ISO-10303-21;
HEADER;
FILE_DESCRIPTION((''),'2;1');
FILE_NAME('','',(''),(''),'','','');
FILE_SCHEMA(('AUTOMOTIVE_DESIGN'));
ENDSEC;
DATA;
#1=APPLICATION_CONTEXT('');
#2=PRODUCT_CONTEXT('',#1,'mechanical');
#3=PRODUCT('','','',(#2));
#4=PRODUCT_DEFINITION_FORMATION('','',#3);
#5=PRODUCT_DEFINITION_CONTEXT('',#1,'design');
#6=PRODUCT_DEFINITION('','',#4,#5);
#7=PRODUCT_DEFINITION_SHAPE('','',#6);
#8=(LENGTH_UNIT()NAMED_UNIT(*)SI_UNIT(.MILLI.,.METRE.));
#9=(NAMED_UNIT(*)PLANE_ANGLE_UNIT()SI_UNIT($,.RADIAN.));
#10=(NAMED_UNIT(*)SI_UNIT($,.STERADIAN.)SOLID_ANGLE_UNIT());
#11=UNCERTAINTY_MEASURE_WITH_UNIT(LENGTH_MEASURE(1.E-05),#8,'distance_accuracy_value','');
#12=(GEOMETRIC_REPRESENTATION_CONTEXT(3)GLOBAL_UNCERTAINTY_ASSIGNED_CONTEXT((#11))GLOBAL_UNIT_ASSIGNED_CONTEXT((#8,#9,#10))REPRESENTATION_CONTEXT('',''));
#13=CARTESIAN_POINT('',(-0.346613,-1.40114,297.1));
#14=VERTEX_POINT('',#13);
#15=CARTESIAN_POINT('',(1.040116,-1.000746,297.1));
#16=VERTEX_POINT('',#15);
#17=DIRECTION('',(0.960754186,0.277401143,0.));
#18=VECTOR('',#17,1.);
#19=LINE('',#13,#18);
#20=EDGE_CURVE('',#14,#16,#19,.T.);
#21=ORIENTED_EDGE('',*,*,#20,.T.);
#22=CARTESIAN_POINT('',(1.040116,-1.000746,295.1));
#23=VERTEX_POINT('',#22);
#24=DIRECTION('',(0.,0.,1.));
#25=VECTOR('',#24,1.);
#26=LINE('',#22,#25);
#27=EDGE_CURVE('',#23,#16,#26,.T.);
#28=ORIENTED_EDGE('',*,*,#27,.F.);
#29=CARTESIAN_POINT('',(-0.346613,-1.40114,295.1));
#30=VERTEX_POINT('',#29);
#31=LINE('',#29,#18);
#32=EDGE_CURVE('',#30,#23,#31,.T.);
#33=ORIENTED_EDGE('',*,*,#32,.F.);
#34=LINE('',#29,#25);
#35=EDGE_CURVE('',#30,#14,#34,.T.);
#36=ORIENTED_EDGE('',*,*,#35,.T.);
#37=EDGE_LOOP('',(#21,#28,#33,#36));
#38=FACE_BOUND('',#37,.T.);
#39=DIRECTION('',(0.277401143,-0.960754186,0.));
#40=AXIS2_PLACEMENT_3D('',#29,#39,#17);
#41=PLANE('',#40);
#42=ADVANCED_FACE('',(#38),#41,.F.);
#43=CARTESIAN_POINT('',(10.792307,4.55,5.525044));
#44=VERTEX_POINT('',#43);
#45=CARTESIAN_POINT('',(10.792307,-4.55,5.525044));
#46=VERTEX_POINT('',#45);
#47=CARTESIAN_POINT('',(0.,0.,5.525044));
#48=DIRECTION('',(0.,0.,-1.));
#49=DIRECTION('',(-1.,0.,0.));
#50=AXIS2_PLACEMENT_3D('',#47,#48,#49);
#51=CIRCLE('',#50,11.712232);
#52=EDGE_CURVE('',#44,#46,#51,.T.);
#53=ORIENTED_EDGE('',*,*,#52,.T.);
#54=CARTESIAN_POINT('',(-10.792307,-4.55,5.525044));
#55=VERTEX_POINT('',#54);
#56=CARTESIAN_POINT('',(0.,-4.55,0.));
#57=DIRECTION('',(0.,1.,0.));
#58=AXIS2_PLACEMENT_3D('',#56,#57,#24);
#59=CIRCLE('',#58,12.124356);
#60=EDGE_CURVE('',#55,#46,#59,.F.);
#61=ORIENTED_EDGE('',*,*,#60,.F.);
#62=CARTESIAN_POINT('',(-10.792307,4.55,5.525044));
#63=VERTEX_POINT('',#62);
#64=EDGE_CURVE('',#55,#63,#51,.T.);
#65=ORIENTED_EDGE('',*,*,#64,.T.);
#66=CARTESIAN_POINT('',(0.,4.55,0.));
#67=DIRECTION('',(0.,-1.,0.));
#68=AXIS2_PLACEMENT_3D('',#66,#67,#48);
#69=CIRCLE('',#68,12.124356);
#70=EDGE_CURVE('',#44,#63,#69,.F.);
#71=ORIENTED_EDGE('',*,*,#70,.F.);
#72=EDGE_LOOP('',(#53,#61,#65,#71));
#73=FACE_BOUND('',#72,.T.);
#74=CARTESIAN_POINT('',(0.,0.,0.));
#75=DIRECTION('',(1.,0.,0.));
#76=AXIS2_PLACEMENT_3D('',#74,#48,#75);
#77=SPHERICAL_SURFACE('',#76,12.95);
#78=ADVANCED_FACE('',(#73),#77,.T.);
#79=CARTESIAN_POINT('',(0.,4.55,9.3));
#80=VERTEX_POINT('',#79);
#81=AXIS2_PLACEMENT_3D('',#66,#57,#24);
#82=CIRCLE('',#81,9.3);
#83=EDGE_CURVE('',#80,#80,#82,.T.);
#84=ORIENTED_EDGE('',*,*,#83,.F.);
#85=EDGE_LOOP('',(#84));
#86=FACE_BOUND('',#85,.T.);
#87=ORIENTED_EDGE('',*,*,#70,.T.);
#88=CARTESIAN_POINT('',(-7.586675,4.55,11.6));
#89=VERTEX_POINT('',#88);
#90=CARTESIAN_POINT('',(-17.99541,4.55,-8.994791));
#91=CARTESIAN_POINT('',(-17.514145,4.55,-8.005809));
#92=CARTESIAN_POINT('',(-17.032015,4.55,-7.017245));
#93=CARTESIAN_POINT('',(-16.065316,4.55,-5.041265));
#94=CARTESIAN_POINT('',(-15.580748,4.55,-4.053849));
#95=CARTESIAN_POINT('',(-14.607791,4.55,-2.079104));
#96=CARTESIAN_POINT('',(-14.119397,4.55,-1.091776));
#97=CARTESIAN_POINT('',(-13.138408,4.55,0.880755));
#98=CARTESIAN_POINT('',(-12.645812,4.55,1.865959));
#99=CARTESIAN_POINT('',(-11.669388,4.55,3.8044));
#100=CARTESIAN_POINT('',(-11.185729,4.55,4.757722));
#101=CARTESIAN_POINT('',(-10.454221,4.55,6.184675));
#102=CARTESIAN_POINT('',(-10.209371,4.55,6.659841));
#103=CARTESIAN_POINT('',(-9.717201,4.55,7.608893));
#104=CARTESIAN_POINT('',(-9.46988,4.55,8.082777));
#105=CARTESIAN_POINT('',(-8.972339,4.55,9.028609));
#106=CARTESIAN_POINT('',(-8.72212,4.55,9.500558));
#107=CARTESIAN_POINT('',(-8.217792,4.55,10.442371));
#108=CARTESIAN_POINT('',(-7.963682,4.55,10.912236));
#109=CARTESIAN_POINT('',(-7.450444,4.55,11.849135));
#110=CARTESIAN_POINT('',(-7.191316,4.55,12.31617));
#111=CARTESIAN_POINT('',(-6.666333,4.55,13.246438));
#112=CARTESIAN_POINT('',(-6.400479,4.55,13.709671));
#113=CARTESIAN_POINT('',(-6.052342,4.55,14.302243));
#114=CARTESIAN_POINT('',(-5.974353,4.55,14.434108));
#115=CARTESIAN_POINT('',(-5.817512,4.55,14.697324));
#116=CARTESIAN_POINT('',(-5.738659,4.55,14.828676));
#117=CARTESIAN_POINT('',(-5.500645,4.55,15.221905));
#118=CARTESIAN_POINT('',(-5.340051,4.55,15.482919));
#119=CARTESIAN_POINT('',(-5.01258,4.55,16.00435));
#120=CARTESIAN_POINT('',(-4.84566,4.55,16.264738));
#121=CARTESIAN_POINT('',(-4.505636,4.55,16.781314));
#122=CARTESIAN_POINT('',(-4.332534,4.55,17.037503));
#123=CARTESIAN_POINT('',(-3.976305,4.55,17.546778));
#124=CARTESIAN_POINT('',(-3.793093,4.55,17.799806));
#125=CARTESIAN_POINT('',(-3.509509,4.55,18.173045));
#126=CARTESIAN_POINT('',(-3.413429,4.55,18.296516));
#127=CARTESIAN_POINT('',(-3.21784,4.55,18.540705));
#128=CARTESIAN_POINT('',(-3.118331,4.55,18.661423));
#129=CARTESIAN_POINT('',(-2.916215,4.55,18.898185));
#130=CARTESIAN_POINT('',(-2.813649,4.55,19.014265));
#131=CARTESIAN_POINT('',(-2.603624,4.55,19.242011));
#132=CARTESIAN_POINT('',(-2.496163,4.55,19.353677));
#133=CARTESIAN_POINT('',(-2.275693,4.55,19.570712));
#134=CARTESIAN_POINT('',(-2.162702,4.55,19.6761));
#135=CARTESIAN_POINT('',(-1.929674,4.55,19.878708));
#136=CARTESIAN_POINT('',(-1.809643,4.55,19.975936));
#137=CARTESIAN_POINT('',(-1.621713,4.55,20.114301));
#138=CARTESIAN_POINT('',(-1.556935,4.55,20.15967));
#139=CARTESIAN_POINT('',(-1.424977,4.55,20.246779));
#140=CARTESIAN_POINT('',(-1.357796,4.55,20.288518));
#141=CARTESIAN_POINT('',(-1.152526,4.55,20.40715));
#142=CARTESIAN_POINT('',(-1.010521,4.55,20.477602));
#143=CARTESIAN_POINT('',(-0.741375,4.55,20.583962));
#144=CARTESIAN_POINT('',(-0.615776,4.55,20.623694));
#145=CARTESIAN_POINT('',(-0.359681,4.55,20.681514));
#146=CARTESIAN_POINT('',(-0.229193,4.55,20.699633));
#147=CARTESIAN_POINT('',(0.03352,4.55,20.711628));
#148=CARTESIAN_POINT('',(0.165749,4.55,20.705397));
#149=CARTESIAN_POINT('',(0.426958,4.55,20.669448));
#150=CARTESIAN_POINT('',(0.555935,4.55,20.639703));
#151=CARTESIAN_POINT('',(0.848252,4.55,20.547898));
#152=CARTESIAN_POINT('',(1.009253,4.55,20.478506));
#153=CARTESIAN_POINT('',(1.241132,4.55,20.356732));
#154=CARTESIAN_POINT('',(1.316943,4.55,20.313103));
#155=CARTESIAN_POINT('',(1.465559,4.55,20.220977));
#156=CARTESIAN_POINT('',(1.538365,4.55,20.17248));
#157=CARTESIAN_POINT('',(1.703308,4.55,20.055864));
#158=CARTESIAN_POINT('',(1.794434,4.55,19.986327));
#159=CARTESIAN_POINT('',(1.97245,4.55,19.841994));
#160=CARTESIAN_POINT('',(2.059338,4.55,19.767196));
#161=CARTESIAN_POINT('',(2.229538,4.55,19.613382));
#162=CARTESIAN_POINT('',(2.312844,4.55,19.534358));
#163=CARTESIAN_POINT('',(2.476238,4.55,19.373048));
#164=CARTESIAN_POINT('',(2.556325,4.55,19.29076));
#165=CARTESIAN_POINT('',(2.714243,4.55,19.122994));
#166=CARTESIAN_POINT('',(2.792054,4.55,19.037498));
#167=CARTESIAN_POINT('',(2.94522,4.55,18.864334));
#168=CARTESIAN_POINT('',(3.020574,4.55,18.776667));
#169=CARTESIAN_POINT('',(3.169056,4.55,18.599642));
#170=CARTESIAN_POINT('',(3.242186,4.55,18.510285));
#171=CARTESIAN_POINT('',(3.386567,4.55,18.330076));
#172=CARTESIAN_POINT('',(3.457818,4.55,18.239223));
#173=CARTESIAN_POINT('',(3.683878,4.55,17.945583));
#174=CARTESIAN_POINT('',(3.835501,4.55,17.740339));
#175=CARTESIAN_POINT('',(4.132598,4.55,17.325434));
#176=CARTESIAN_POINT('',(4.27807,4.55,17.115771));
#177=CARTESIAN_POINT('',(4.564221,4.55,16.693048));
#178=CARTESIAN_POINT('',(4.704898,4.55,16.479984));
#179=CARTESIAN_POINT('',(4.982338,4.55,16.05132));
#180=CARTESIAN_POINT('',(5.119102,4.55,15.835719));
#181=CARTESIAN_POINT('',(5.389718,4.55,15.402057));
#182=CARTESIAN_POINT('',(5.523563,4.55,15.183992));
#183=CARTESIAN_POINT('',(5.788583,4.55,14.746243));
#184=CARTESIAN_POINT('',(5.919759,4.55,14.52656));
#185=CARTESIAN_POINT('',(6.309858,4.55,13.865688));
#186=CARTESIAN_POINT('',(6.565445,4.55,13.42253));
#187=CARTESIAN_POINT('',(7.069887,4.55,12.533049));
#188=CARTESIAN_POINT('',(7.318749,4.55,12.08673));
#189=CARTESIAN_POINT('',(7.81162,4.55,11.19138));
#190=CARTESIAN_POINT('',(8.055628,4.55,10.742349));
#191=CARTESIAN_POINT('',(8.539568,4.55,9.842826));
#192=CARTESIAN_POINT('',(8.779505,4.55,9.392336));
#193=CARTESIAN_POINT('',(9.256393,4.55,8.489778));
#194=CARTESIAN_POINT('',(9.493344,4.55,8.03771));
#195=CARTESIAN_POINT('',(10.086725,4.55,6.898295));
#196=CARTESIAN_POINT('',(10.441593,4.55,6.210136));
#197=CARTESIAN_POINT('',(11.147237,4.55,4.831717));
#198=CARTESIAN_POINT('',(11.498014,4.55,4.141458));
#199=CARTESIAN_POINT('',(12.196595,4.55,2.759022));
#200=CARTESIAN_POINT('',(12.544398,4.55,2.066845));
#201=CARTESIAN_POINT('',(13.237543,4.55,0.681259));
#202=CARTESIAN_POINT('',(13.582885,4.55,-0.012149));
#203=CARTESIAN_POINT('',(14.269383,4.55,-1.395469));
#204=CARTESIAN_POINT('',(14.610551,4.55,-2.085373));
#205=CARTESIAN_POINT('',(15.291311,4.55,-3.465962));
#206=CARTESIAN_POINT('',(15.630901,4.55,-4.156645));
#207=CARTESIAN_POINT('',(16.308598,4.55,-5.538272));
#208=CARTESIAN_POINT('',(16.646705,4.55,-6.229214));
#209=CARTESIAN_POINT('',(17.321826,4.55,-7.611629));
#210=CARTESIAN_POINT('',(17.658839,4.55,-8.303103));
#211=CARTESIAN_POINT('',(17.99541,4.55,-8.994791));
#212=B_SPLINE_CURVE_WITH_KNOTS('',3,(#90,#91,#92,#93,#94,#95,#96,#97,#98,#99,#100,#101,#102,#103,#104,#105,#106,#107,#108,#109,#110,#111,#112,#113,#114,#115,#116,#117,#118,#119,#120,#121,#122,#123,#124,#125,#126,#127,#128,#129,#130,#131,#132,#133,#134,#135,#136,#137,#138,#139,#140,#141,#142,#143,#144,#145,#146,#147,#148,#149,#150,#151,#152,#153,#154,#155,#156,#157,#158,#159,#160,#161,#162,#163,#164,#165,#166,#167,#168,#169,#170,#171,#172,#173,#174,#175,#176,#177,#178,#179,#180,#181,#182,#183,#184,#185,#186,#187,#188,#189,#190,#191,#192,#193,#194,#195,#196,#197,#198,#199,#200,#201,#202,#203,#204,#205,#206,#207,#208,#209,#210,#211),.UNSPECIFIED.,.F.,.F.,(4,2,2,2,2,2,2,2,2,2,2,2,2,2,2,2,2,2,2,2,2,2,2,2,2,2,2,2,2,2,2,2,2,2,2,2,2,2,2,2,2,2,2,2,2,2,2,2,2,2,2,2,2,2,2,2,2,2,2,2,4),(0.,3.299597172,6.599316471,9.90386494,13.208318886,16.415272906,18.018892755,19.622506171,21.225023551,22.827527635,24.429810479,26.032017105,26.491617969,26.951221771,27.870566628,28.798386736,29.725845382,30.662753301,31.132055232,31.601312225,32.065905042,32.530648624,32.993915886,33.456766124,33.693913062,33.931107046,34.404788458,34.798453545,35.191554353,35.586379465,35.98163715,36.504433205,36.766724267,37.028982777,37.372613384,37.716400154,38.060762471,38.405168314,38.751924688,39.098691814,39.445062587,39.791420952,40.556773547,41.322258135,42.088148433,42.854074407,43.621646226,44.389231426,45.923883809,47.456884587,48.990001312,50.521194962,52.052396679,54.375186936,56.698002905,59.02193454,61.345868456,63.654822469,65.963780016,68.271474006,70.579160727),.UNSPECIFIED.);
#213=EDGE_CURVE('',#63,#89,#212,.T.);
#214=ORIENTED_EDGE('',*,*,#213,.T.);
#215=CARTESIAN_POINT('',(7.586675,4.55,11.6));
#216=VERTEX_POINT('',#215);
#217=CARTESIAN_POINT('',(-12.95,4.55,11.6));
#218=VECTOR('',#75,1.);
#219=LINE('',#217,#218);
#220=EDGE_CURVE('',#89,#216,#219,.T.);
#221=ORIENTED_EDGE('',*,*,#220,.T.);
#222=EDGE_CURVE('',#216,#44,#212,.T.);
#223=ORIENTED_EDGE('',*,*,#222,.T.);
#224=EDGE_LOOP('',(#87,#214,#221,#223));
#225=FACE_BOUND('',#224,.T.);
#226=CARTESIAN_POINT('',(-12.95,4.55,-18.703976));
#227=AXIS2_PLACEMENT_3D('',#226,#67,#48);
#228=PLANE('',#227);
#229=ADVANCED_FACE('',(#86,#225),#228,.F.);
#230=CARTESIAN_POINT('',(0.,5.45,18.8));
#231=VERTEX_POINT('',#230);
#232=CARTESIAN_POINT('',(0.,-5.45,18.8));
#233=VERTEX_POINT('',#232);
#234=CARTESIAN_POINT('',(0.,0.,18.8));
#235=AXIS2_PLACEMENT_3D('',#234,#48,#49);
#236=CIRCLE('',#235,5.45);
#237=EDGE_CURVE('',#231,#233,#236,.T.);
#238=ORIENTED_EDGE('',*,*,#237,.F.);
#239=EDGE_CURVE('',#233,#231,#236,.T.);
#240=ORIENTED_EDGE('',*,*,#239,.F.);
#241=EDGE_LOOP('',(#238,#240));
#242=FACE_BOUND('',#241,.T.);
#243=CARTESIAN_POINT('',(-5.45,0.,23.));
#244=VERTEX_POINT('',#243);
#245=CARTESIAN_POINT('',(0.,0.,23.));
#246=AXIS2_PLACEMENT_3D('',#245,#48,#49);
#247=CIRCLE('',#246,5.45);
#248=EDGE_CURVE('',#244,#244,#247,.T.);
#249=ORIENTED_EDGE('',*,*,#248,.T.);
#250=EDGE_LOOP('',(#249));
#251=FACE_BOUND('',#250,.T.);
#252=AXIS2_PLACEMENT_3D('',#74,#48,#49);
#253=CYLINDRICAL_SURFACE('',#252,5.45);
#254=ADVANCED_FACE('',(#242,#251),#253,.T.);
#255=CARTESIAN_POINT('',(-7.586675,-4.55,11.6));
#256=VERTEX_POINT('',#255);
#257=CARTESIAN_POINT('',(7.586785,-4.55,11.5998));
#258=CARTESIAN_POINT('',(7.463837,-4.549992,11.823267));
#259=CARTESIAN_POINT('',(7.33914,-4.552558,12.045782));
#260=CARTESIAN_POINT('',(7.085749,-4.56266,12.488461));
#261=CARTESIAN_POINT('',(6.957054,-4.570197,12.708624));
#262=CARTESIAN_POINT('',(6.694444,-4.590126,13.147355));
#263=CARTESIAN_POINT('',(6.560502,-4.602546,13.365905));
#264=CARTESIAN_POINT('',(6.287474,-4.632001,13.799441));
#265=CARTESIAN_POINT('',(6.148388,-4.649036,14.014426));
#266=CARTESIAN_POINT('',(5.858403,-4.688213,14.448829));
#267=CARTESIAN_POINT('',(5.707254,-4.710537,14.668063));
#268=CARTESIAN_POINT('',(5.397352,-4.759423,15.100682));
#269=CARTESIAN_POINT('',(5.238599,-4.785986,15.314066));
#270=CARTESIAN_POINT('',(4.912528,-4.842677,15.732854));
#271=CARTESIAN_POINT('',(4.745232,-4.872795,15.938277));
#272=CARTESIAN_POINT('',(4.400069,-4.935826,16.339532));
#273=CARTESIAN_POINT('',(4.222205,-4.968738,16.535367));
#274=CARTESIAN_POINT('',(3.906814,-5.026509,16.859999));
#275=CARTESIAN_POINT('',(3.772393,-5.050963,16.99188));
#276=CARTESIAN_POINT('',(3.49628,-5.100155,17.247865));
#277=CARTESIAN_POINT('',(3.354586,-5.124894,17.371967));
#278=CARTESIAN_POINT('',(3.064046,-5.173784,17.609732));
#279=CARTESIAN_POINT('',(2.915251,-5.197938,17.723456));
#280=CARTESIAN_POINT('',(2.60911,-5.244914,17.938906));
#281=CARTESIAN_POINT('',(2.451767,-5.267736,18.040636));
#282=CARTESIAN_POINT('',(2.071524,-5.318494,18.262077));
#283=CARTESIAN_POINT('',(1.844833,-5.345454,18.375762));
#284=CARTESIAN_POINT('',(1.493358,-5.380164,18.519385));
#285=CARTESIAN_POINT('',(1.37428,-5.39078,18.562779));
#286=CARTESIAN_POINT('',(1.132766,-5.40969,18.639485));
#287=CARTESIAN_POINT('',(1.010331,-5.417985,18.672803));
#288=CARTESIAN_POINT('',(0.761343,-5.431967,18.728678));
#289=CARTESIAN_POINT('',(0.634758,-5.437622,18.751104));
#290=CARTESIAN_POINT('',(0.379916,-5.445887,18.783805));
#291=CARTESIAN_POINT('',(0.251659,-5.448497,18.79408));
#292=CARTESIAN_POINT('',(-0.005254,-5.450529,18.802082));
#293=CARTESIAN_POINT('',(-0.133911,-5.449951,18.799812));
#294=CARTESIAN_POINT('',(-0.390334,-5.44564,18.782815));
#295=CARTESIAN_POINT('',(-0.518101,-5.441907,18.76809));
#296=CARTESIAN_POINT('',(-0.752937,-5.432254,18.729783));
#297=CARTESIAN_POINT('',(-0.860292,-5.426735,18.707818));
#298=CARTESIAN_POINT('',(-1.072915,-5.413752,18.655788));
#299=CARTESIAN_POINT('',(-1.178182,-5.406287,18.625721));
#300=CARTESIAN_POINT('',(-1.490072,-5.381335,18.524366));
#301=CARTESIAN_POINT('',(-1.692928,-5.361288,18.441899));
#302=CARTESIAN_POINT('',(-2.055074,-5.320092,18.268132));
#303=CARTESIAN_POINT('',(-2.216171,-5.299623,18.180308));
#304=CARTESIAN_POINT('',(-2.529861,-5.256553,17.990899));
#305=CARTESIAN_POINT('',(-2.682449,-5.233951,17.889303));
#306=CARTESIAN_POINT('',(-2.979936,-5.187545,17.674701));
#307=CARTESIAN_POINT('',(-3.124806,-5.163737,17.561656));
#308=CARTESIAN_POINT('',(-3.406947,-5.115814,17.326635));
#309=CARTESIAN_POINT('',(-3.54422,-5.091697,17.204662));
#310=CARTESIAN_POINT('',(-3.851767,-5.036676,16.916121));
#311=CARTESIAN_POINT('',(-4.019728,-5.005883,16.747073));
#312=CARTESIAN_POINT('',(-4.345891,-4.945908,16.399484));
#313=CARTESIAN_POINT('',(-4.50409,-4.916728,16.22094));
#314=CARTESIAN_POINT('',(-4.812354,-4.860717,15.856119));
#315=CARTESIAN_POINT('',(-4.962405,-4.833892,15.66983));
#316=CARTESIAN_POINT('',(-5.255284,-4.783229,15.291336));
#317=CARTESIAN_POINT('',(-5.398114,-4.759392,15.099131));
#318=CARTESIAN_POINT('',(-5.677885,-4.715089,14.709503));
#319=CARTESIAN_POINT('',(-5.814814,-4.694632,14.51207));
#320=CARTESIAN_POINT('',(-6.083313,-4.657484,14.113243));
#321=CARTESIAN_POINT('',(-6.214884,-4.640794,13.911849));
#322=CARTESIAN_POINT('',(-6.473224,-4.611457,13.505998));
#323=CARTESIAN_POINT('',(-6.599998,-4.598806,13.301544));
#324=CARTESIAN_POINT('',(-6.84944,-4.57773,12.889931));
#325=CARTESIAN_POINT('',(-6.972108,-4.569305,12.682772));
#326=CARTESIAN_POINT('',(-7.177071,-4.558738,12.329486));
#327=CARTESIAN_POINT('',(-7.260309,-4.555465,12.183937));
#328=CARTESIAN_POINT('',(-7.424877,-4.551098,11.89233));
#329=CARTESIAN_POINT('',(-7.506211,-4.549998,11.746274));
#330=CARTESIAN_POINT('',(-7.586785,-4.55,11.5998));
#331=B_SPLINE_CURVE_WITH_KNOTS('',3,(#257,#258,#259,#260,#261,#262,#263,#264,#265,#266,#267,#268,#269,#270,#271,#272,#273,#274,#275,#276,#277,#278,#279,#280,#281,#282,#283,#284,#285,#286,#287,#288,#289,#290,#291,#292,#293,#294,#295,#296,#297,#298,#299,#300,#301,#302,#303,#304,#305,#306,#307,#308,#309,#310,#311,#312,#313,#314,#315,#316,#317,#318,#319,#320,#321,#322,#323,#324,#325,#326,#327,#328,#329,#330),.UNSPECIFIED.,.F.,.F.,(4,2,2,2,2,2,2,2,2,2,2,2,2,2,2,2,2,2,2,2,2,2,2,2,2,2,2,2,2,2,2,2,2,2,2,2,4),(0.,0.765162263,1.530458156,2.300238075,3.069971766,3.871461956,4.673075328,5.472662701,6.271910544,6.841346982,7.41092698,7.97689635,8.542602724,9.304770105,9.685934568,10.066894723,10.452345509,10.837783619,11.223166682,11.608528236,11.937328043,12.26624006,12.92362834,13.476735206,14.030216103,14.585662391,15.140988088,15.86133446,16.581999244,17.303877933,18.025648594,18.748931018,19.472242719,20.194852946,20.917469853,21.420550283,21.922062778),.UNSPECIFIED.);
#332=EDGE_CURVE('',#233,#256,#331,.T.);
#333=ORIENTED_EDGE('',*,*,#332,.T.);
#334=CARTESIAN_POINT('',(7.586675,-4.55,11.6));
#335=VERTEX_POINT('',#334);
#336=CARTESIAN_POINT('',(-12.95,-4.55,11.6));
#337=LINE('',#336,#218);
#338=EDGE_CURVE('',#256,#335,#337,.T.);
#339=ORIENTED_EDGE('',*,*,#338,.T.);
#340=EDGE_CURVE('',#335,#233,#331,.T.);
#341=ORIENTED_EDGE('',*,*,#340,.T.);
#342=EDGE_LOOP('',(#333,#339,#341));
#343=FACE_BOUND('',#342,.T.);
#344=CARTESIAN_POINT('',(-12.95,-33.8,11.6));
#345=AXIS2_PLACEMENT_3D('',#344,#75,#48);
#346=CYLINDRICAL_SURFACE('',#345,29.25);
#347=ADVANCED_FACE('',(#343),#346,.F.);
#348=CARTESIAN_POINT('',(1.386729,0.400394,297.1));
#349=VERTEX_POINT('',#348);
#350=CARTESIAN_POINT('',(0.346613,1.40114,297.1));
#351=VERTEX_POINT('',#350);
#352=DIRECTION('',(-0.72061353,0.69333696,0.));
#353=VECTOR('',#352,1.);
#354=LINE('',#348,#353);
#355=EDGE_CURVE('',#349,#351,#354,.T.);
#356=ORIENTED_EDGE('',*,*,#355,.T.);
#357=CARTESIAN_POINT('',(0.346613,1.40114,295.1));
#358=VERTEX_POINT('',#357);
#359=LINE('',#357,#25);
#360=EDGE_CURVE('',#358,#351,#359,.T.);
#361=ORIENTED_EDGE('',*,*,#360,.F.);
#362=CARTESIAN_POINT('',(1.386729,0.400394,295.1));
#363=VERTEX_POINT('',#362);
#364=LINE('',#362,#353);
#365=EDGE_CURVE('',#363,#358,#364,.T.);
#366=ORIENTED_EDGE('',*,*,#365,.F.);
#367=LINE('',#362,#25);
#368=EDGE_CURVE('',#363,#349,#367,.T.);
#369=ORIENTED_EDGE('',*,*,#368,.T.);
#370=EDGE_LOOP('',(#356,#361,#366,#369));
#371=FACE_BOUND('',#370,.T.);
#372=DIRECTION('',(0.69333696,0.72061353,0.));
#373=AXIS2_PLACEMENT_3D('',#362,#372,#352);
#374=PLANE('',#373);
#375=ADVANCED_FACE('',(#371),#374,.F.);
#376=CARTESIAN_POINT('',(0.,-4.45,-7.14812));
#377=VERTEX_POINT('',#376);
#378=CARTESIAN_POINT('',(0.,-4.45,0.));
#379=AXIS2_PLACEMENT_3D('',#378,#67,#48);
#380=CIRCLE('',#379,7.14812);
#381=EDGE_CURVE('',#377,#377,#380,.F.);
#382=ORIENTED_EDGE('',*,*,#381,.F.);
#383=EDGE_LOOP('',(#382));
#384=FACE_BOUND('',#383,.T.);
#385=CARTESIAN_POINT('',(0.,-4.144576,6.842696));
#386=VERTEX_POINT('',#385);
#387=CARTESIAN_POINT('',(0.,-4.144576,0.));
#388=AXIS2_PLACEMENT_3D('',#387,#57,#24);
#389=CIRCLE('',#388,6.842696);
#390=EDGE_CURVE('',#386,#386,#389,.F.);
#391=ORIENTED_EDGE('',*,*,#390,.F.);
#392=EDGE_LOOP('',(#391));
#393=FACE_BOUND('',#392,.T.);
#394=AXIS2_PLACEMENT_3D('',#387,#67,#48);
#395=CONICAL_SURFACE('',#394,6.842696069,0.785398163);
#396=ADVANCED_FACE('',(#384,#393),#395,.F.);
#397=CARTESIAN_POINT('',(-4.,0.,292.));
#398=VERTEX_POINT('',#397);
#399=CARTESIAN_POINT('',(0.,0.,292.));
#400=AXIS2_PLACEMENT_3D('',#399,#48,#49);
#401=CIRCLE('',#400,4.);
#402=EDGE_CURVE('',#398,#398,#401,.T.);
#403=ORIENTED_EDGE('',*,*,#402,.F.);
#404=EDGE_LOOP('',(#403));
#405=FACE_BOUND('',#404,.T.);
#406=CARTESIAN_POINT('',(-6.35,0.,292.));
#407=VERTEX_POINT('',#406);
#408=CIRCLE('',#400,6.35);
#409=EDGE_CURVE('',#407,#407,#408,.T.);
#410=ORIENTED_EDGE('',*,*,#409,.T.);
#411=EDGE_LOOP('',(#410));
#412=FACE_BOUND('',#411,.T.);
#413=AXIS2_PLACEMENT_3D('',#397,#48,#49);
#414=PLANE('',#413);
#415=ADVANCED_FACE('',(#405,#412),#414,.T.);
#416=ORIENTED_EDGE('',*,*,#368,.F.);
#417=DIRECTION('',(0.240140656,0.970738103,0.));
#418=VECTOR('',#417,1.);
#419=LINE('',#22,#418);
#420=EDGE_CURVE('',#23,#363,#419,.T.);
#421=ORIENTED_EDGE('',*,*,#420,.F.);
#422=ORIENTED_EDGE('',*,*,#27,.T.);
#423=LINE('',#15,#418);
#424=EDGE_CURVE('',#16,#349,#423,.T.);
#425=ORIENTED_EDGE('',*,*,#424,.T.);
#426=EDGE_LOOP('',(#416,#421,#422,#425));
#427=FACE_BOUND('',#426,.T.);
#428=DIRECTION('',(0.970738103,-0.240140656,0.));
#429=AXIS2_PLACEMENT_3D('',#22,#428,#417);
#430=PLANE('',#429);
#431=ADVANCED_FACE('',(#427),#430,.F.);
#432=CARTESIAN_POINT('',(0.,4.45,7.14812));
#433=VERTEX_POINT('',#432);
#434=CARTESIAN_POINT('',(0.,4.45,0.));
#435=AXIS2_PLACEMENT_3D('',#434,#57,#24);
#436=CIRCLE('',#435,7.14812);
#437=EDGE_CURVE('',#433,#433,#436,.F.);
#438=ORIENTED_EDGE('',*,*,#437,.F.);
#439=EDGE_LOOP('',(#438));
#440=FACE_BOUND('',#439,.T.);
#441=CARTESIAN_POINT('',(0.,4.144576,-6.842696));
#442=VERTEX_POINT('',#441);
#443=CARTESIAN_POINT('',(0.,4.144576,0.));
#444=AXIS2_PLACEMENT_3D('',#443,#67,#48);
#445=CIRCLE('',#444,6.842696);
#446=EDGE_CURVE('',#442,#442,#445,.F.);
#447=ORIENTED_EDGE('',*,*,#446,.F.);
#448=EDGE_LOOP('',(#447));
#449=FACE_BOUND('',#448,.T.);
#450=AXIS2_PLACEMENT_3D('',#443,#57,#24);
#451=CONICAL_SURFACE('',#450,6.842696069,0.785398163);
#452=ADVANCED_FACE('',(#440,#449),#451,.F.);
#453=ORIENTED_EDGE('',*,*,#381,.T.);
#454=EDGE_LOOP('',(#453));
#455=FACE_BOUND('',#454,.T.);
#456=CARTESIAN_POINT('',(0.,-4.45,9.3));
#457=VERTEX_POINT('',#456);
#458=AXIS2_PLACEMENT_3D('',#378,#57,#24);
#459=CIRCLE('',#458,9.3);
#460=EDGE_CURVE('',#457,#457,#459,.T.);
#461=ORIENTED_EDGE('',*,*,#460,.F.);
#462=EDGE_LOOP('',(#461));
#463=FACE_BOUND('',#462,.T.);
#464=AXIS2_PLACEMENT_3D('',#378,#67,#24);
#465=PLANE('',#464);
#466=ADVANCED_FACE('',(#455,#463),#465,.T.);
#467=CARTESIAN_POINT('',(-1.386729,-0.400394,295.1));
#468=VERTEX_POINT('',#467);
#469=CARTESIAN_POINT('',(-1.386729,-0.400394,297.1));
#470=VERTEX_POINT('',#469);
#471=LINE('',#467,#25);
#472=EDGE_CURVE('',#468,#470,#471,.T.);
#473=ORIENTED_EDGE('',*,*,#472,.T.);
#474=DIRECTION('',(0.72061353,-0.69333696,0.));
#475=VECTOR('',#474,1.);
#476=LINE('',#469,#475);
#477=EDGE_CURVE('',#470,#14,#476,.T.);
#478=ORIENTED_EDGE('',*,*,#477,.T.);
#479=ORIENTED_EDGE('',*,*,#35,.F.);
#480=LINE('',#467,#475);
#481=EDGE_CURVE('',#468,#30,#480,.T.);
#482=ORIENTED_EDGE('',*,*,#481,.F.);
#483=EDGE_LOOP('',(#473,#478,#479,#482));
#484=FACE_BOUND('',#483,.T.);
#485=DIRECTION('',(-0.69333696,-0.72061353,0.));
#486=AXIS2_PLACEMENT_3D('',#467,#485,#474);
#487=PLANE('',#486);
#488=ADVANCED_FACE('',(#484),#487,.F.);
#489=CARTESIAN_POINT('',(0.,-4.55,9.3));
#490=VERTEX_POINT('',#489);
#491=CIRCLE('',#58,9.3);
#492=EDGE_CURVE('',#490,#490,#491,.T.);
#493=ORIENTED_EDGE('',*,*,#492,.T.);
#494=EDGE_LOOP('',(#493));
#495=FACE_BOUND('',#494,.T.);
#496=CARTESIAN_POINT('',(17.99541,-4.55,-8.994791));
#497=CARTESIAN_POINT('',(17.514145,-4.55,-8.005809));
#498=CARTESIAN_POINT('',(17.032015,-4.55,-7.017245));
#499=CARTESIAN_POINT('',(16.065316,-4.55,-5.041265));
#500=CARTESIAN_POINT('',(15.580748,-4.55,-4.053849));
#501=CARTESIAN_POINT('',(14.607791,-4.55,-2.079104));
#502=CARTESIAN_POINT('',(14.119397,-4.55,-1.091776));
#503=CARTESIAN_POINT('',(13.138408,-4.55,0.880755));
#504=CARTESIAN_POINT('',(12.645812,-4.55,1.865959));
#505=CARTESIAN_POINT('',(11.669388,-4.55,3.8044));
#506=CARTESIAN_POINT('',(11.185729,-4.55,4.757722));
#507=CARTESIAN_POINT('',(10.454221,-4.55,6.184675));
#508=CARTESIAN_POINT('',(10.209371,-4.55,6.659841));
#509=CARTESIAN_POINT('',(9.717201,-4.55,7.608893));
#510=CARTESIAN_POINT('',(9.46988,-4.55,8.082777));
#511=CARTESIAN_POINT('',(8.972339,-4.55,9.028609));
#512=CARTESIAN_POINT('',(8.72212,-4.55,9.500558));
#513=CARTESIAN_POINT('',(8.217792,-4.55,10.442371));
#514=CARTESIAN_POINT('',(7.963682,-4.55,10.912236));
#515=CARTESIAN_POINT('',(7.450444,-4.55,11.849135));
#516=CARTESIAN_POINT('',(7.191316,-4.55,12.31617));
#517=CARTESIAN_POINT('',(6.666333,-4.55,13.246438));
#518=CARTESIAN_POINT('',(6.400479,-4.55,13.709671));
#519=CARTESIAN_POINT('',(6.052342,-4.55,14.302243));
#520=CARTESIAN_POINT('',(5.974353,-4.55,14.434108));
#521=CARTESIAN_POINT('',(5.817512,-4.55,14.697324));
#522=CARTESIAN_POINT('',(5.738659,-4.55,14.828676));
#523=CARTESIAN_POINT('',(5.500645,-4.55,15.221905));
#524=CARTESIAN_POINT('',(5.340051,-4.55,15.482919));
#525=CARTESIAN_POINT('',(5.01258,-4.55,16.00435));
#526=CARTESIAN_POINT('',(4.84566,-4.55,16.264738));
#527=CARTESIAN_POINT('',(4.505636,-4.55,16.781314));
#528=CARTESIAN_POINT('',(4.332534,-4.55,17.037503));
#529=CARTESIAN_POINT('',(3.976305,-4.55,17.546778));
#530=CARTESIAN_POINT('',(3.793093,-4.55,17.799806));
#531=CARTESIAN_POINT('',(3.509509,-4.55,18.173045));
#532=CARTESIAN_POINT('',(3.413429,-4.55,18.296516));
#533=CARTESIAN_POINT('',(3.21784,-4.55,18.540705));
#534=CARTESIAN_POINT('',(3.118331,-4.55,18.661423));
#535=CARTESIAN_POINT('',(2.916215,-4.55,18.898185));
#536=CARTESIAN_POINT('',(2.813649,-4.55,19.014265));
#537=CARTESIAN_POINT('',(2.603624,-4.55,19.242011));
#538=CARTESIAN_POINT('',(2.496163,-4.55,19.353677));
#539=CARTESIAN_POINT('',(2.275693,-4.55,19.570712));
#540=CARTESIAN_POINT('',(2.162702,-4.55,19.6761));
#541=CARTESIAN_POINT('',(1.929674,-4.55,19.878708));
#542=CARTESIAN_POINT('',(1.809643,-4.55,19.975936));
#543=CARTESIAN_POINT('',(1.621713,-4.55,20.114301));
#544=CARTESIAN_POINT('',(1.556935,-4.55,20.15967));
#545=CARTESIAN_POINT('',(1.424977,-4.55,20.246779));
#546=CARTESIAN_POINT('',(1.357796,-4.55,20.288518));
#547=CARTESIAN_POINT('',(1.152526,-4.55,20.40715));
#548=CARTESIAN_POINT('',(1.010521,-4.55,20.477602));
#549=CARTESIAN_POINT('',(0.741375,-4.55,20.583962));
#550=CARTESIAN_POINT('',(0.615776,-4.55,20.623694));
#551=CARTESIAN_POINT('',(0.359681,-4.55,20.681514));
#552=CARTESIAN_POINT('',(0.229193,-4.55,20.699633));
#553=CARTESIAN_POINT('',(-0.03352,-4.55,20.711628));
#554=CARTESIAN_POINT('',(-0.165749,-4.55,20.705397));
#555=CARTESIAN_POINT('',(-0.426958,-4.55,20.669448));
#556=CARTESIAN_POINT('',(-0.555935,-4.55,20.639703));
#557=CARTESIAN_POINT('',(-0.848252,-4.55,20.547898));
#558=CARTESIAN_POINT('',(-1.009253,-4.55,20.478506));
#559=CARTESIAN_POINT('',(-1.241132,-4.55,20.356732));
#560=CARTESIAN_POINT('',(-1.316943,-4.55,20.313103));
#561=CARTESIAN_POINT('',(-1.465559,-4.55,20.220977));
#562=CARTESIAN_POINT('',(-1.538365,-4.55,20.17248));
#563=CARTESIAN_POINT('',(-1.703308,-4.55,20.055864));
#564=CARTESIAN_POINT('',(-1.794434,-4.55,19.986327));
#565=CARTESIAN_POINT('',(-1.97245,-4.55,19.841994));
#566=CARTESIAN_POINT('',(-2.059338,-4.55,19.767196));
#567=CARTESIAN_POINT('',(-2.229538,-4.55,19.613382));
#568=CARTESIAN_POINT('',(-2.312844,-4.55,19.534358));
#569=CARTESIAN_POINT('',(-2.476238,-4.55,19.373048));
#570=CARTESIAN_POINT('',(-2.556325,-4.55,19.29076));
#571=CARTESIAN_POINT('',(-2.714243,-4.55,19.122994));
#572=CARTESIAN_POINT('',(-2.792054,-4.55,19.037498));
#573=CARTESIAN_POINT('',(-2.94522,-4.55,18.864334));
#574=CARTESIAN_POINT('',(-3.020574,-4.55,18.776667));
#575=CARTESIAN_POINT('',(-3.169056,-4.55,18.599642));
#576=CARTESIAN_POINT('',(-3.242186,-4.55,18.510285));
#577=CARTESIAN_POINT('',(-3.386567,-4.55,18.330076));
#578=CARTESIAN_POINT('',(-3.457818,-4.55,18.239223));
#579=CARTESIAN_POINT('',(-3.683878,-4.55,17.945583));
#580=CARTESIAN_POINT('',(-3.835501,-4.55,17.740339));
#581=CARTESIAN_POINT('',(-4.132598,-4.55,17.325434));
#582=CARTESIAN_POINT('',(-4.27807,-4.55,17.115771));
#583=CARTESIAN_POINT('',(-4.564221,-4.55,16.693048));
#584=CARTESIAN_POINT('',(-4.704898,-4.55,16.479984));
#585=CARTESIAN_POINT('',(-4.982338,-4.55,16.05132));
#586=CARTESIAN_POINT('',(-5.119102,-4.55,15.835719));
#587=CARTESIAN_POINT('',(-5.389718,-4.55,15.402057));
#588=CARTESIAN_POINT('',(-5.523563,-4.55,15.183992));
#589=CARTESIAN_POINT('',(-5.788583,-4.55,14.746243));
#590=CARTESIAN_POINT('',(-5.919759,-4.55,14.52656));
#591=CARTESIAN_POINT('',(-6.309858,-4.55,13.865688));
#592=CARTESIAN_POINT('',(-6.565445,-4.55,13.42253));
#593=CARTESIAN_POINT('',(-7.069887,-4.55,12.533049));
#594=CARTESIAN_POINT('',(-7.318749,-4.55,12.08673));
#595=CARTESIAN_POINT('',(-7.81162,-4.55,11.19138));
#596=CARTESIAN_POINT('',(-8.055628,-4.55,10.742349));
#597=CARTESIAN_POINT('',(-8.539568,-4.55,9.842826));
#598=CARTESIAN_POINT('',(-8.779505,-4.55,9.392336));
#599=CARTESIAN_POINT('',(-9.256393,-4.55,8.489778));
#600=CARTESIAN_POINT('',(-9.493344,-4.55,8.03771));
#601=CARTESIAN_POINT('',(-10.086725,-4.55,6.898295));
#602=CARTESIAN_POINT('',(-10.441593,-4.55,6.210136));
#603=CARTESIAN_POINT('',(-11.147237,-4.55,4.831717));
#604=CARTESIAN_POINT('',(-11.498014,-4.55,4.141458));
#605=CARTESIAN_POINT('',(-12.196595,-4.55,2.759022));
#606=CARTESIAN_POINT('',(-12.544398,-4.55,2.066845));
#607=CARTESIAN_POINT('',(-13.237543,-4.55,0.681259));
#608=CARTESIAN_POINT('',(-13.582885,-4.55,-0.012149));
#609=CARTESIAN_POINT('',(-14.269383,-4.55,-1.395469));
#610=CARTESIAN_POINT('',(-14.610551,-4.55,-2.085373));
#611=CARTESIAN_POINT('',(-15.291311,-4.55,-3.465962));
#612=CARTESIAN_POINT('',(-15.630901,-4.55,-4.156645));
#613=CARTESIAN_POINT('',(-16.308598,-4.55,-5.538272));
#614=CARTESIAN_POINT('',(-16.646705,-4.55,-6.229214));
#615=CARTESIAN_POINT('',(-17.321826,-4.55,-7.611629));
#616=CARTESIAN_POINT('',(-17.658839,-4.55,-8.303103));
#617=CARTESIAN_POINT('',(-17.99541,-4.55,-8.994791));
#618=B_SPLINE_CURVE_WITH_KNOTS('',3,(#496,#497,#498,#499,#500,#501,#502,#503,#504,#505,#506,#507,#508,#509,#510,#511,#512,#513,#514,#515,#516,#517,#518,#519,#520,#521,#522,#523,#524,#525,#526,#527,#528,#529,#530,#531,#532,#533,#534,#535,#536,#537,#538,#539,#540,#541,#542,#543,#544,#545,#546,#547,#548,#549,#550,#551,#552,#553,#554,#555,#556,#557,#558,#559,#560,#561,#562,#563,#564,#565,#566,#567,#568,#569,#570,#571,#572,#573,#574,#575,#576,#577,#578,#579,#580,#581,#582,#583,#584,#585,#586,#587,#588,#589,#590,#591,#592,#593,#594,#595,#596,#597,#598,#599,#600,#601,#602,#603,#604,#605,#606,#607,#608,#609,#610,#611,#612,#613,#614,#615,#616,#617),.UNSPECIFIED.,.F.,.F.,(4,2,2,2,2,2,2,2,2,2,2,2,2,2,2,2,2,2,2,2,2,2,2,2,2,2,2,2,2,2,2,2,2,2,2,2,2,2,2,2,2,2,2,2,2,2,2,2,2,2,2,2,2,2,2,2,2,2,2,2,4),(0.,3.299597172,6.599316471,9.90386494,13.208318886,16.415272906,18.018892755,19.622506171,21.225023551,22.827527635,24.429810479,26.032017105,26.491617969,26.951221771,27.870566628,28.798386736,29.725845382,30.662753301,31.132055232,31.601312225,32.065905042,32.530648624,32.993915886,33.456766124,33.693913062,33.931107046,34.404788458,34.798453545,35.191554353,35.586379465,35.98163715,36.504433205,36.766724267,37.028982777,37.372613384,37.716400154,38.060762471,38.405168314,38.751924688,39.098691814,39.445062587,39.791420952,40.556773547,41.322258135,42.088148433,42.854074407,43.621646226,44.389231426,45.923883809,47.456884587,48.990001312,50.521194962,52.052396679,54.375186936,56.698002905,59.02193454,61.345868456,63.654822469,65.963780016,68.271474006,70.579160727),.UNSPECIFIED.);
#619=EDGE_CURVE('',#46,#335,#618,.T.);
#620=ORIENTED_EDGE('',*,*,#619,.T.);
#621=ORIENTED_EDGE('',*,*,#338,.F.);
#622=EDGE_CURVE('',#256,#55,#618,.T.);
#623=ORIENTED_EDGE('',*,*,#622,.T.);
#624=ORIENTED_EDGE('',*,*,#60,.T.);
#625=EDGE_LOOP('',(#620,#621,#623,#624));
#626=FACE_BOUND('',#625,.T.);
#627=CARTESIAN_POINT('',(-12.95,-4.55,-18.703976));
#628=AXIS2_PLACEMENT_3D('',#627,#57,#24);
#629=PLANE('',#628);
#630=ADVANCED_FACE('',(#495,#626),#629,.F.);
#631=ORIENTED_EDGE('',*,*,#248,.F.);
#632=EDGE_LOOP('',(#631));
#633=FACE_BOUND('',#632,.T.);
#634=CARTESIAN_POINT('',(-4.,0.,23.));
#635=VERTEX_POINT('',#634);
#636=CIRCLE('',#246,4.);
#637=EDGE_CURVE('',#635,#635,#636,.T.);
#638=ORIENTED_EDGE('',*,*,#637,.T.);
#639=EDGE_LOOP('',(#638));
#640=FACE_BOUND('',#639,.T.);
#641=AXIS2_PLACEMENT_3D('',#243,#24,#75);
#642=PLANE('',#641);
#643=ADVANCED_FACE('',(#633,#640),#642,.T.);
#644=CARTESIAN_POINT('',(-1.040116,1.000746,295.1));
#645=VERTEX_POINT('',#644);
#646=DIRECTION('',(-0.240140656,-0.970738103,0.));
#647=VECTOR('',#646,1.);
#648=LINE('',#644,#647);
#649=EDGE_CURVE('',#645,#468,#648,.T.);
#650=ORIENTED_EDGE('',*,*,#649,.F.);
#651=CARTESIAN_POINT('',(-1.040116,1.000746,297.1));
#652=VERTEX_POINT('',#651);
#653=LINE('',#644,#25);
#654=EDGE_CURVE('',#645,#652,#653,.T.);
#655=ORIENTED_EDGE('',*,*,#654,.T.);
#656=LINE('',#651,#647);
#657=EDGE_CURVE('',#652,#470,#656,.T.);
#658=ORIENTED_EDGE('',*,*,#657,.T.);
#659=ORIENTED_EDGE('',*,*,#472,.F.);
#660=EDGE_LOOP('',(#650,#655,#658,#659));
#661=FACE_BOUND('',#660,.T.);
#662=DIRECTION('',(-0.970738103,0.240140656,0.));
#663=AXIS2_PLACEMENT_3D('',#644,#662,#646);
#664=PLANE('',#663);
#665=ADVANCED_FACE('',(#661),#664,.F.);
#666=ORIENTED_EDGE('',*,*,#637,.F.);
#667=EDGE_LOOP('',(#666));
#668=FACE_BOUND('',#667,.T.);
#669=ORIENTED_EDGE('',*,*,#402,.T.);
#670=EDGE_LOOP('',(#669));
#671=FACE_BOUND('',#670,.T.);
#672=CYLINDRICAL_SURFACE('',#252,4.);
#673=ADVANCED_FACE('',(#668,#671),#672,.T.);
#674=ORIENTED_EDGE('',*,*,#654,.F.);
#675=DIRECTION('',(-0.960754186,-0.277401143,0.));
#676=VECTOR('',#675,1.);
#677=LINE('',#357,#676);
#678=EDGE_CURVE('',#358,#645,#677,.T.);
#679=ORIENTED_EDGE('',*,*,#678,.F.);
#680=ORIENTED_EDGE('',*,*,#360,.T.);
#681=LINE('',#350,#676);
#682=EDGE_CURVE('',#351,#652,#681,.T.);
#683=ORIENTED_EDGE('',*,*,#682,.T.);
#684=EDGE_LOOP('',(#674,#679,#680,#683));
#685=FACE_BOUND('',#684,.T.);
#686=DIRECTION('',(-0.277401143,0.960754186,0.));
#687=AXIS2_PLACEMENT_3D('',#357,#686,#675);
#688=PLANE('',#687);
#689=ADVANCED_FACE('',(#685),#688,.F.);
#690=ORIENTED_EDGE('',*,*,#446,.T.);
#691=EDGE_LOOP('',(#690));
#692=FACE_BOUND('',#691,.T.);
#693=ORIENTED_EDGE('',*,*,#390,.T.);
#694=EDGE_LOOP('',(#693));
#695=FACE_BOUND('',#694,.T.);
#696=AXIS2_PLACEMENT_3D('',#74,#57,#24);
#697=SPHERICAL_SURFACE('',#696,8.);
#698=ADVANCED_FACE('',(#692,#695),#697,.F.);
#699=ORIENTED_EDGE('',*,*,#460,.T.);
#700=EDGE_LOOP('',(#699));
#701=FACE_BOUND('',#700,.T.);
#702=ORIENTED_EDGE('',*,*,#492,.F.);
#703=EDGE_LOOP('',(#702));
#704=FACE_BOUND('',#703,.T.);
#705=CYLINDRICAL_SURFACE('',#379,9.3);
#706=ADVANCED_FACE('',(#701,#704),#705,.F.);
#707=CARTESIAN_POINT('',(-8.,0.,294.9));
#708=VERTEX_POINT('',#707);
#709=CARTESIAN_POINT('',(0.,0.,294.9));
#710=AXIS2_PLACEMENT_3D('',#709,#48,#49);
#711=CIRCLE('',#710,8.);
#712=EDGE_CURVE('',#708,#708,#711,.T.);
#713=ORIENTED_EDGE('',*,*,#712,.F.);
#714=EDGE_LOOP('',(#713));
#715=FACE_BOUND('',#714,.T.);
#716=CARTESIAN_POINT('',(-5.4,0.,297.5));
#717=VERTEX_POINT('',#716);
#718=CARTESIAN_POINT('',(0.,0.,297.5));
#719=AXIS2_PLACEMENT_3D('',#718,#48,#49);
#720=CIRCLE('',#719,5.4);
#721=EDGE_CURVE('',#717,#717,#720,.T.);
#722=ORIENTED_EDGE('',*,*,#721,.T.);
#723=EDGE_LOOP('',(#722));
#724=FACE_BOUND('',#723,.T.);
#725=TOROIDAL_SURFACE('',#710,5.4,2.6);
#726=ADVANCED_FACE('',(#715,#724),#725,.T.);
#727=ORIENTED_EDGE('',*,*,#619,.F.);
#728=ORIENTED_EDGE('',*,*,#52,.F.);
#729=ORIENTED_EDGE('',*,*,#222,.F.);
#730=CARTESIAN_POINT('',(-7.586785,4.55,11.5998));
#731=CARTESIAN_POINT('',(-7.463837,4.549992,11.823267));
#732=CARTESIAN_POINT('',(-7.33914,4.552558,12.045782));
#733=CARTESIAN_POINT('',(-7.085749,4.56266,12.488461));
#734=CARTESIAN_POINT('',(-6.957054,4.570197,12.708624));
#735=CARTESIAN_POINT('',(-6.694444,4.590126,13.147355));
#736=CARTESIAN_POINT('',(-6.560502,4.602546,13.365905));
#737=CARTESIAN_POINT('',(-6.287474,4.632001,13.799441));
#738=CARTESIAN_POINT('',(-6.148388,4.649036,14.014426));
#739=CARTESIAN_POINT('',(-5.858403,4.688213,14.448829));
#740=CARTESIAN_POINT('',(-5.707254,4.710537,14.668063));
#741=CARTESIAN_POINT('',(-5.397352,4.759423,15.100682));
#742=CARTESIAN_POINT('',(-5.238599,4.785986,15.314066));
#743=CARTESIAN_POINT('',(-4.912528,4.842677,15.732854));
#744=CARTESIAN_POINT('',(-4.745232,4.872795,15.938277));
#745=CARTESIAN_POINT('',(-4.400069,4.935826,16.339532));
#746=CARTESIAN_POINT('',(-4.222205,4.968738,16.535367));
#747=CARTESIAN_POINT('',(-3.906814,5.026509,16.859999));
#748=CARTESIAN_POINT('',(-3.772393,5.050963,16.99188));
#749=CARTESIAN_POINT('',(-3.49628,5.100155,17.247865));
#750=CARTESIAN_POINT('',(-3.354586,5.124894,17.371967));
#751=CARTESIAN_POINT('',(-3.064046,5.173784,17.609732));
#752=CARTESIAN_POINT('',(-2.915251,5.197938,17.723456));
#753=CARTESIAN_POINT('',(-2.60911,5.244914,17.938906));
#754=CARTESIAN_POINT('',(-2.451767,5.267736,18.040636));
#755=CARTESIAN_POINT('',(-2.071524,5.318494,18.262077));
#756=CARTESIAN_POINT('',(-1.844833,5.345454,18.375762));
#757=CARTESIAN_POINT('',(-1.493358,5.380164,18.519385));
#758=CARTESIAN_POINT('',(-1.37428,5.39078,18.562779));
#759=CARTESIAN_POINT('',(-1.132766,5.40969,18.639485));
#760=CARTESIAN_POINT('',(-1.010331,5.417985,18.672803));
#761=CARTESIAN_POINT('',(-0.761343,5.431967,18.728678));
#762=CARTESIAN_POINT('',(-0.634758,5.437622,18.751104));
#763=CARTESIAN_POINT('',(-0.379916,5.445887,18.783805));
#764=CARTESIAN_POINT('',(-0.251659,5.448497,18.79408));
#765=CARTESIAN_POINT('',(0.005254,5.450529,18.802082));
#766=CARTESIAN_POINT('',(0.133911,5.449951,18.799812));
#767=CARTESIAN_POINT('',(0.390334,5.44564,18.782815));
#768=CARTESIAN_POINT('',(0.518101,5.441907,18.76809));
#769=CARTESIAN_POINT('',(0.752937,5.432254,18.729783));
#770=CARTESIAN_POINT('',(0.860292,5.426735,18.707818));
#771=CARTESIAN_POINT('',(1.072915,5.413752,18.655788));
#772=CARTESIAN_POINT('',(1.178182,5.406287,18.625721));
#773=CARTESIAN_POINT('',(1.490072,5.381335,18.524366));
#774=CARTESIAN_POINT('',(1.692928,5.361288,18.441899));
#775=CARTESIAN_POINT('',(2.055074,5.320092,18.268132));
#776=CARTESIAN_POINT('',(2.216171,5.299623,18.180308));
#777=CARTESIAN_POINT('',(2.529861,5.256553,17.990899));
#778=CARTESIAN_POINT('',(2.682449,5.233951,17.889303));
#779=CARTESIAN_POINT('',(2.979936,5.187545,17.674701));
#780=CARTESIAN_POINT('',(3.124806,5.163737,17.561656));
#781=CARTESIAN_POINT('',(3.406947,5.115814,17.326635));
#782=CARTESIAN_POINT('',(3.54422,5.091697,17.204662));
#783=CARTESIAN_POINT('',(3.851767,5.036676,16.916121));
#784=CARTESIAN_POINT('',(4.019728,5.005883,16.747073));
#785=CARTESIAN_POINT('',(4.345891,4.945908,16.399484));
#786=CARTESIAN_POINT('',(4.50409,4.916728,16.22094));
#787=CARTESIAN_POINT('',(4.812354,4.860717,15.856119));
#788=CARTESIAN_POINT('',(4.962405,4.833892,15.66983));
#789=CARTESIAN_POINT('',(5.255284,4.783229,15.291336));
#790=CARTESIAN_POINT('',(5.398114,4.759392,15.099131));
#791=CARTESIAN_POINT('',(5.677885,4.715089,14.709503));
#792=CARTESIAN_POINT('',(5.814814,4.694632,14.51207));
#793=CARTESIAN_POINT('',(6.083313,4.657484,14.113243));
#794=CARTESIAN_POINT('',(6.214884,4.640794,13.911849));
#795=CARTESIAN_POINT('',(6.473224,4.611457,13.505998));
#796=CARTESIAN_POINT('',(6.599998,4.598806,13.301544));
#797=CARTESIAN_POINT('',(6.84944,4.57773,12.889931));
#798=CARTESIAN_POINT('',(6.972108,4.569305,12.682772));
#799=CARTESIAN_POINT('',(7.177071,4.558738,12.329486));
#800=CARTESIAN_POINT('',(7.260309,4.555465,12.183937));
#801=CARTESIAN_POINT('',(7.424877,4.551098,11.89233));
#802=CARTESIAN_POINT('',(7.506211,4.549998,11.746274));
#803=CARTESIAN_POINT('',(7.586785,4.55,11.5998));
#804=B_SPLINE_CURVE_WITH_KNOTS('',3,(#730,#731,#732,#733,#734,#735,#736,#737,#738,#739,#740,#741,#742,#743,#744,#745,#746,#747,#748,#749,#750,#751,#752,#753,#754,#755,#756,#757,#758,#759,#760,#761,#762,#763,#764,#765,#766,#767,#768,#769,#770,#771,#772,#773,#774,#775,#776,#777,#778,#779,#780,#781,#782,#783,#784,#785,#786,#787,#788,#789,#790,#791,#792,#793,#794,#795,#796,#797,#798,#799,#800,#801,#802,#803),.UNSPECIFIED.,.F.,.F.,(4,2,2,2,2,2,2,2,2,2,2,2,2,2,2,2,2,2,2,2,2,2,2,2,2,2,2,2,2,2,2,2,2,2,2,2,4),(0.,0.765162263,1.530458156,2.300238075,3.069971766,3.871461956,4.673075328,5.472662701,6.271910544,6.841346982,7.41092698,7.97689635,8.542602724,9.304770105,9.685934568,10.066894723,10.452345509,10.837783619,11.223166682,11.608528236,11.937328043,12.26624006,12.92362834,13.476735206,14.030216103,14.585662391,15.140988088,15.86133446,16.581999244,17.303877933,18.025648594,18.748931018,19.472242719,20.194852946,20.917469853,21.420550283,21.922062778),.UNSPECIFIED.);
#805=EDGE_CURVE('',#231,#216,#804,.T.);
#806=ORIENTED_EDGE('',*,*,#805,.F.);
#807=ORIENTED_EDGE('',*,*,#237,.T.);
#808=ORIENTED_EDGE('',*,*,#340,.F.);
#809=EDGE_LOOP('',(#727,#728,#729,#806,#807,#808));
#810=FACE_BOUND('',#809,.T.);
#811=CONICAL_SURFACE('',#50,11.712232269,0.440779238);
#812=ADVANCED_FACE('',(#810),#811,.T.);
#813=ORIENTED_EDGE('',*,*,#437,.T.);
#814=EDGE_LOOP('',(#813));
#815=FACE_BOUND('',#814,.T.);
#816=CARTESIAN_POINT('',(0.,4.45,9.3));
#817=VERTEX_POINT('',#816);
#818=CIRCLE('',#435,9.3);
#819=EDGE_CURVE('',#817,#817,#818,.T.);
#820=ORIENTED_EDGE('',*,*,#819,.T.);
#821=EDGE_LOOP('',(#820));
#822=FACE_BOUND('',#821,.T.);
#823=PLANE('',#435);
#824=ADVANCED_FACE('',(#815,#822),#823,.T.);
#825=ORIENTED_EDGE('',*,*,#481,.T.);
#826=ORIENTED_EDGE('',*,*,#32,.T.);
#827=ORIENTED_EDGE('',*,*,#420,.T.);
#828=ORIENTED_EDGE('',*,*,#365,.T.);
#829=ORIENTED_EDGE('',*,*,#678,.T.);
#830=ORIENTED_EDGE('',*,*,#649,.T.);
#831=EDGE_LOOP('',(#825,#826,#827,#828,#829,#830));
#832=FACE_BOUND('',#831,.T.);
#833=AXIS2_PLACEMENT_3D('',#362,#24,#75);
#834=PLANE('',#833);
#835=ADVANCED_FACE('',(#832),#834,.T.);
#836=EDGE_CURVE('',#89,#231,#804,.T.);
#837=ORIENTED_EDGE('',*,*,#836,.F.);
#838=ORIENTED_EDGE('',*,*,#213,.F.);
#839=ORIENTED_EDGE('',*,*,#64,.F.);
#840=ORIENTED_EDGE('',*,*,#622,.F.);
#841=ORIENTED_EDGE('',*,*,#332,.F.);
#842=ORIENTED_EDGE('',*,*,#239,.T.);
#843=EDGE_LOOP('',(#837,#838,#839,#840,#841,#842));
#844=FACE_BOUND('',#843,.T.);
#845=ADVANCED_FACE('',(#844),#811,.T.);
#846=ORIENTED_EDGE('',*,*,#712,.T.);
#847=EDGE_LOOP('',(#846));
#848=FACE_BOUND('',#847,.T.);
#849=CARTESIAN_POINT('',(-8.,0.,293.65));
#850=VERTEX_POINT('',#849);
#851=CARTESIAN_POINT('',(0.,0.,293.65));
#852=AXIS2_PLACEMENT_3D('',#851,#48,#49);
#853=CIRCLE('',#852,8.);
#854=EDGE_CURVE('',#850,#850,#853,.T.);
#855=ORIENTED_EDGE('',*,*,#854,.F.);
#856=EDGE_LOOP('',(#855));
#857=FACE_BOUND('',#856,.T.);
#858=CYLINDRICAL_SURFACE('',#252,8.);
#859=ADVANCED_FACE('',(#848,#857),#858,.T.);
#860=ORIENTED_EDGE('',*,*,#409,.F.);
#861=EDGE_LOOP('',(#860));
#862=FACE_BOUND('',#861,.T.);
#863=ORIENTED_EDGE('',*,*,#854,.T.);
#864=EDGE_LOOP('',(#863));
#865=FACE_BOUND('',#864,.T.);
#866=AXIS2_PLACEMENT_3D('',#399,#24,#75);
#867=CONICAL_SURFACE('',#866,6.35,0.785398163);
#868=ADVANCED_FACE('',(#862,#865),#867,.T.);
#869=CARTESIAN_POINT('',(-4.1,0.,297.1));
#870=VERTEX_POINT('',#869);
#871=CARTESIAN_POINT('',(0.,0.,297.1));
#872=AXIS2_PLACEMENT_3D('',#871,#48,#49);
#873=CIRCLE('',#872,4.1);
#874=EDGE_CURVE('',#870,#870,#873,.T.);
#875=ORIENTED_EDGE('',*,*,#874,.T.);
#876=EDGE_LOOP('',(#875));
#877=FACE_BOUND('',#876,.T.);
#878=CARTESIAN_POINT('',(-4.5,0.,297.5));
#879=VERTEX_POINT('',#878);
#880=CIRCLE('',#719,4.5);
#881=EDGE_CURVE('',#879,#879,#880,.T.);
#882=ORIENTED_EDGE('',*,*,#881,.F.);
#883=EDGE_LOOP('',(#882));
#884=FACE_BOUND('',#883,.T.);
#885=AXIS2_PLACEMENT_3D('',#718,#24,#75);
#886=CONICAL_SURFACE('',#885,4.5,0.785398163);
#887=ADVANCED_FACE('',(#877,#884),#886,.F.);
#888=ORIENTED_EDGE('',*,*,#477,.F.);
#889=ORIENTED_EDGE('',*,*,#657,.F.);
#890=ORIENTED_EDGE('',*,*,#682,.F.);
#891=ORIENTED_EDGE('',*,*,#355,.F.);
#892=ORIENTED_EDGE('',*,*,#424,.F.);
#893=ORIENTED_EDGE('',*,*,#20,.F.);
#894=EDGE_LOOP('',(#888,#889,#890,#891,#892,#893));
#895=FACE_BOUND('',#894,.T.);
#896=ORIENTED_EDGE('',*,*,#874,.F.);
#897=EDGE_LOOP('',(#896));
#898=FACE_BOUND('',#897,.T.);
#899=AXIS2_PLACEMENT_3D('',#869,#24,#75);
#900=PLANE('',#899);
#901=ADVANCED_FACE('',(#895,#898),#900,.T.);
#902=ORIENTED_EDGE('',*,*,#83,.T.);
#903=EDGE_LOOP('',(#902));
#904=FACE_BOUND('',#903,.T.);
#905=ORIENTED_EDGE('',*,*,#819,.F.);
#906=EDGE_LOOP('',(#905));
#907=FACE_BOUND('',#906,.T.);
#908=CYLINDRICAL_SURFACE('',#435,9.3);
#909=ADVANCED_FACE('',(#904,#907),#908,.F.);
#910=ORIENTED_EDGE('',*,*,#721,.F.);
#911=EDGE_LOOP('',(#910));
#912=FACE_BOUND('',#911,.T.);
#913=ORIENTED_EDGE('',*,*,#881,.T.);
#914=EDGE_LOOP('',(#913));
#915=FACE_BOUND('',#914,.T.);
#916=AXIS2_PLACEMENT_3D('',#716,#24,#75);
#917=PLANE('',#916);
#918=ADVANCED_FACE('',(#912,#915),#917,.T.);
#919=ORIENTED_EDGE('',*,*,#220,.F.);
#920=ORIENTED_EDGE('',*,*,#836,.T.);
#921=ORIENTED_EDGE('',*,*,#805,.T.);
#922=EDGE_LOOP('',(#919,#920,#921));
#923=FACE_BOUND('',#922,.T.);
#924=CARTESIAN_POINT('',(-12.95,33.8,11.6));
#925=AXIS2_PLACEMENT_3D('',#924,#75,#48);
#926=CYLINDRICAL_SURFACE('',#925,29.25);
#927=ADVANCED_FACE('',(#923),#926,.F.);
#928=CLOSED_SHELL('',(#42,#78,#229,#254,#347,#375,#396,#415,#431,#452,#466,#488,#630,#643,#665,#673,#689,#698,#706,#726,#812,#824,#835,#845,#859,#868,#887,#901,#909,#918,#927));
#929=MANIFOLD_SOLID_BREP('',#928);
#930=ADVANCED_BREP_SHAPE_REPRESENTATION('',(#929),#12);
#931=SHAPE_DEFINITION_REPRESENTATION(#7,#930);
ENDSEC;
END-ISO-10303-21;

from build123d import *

# Parameters (mm, degrees)
EXTRUDE1_DEPTH      = 2
EXTRUDE2_DEPTH      = 299.063172834
EXTRUDE2_DEPTH_BACK = 299.063172834
SKETCH4_R           = 9.3
EXTRUDE3_DEPTH      = 0.1
CHAMFER1_SIZE       = 0.5


with BuildPart() as part:
    # Sketch1 → Revolve1 (revolve)
    with BuildSketch(Plane(origin=(0, 0, 0), x_dir=(1, 0, 0), z_dir=(0, 1, 0))):
        with BuildLine():
            Line((-11.712232269, -5.525044369), (-5.45, -18.8))
            Line((-5.45, -18.8), (-5.45, -23))
            Line((-5.45, -23), (-4, -23))
            Line((-4, -23), (-4, -292))
            Line((-4, -292), (-6.35, -292))
            Line((-6.35, -292), (-8, -293.65))
            Line((-8, -293.65), (-8, -294.9))
            ThreePointArc((-8, -294.9), (-7.238477631, -296.738477631), (-5.4, -297.5))
            Line((-5.4, -297.5), (-4.5, -297.5))
            Line((-4.5, -297.5), (-4.1, -297.1))
            Line((-4.1, -297.1), (0, -297.1))
            Line((0, -297.1), (0, -8))
            ThreePointArc((0, -8), (-8, 0), (0, 8))
            Line((0, 8), (0, 12.95))
            ThreePointArc((0, 12.95), (-10.937363132, 6.933728269), (-11.712232269, -5.525044369))
        make_face()
    revolve(axis=Axis((0, 0, 0), (0, 0, 1)))

    # Sketch2 → Extrude1 (cut)
    with BuildSketch(Plane.XY.offset(297.1)):
        Polygon((1.38672922, 0.400394061), (0.346613181, 1.401139763), (-1.040116039, 1.000745702), (-1.38672922, -0.400394061), (-0.346613181, -1.401139763), (1.040116039, -1.000745702), align=None)
    extrude(amount=-EXTRUDE1_DEPTH, mode=Mode.SUBTRACT)

    # Sketch3 → Extrude2 (cut, two sides: drawn at the far end of the back side and taken through both)
    with BuildSketch(Plane(origin=(0, 0, 0), x_dir=(0, 0, -1), z_dir=(1, 0, 0)).offset(-EXTRUDE2_DEPTH_BACK)):
        with BuildLine():
            Line((18.703975577, 4.55), (-11.6, 4.55))
            ThreePointArc((-11.6, 4.55), (-15.228015987, 4.775872106), (-18.8, 5.45))
            Line((-18.8, 5.45), (-23, 5.45))
            Line((-23, 5.45), (-23, 17.731418952))
            Line((-23, 17.731418952), (18.703975577, 17.731418952))
            Line((18.703975577, 17.731418952), (18.703975577, 4.55))
        make_face()
        with BuildLine():
            Line((18.703975577, -17.731418952), (18.703975577, -4.55))
            Line((18.703975577, -4.55), (-11.6, -4.55))
            ThreePointArc((-11.6, -4.55), (-15.228015987, -4.775872106), (-18.8, -5.45))
            Line((-18.8, -5.45), (-23, -5.45))
            Line((-23, -5.45), (-23, -17.731418952))
            Line((-23, -17.731418952), (18.703975577, -17.731418952))
        make_face()
    extrude(amount=EXTRUDE2_DEPTH + EXTRUDE2_DEPTH_BACK, mode=Mode.SUBTRACT)

    # Sketch4 → Extrude3 (cut)
    with BuildSketch(Plane(origin=(0, 4.55, 0), x_dir=(1, 0, 0), z_dir=(0, 1, 0))):
        with Locations(Location((0, 0, 0), (0, 0, 270))):
            Circle(SKETCH4_R)
    extrude3 = extrude(amount=-EXTRUDE3_DEPTH, mode=Mode.SUBTRACT)

    # Mirror1: Extrude3 across plane
    add(extrude3.mirror(Plane.ZX), mode=Mode.SUBTRACT)

    # Chamfer1
    # the kernel refuses this chamfer: 0.5, 0.360421404 mm, written as the material it takes off along each edge
    with BuildSketch(Plane(origin=(0, 4.45, 0), x_dir=(0, 0, 1), z_dir=(-1, 0, 0))) as chamfer1_piece_1:
        with BuildLine():
            Line((6.648120035 + CHAMFER1_SIZE, 0), (6.842696069, -0.305423966))
            ThreePointArc((6.842696069, -0.305423966), (6.748300889, -0.153439154), (6.648120035, 0))
            Line((6.648120035, 0), (6.648120035 + CHAMFER1_SIZE, 0))
        make_face()
    revolve(axis=Axis((0, 4.45, 0), (0, 1, 0)), mode=Mode.SUBTRACT)
    with BuildSketch(Plane(origin=(0, -4.45, 0), x_dir=(0, 0, 1), z_dir=(-1, 0, 0))) as chamfer1_piece_2:
        with BuildLine():
            Line((6.648120035 + CHAMFER1_SIZE, 0), (6.842696069, 0.305423966))
            ThreePointArc((6.842696069, 0.305423966), (6.748300889, 0.153439154), (6.648120035, 0))
            Line((6.648120035, 0), (6.648120035 + CHAMFER1_SIZE, 0))
        make_face()
    revolve(axis=Axis((0, -4.45, 0), (0, 1, 0)), mode=Mode.SUBTRACT)


solid = part.part
